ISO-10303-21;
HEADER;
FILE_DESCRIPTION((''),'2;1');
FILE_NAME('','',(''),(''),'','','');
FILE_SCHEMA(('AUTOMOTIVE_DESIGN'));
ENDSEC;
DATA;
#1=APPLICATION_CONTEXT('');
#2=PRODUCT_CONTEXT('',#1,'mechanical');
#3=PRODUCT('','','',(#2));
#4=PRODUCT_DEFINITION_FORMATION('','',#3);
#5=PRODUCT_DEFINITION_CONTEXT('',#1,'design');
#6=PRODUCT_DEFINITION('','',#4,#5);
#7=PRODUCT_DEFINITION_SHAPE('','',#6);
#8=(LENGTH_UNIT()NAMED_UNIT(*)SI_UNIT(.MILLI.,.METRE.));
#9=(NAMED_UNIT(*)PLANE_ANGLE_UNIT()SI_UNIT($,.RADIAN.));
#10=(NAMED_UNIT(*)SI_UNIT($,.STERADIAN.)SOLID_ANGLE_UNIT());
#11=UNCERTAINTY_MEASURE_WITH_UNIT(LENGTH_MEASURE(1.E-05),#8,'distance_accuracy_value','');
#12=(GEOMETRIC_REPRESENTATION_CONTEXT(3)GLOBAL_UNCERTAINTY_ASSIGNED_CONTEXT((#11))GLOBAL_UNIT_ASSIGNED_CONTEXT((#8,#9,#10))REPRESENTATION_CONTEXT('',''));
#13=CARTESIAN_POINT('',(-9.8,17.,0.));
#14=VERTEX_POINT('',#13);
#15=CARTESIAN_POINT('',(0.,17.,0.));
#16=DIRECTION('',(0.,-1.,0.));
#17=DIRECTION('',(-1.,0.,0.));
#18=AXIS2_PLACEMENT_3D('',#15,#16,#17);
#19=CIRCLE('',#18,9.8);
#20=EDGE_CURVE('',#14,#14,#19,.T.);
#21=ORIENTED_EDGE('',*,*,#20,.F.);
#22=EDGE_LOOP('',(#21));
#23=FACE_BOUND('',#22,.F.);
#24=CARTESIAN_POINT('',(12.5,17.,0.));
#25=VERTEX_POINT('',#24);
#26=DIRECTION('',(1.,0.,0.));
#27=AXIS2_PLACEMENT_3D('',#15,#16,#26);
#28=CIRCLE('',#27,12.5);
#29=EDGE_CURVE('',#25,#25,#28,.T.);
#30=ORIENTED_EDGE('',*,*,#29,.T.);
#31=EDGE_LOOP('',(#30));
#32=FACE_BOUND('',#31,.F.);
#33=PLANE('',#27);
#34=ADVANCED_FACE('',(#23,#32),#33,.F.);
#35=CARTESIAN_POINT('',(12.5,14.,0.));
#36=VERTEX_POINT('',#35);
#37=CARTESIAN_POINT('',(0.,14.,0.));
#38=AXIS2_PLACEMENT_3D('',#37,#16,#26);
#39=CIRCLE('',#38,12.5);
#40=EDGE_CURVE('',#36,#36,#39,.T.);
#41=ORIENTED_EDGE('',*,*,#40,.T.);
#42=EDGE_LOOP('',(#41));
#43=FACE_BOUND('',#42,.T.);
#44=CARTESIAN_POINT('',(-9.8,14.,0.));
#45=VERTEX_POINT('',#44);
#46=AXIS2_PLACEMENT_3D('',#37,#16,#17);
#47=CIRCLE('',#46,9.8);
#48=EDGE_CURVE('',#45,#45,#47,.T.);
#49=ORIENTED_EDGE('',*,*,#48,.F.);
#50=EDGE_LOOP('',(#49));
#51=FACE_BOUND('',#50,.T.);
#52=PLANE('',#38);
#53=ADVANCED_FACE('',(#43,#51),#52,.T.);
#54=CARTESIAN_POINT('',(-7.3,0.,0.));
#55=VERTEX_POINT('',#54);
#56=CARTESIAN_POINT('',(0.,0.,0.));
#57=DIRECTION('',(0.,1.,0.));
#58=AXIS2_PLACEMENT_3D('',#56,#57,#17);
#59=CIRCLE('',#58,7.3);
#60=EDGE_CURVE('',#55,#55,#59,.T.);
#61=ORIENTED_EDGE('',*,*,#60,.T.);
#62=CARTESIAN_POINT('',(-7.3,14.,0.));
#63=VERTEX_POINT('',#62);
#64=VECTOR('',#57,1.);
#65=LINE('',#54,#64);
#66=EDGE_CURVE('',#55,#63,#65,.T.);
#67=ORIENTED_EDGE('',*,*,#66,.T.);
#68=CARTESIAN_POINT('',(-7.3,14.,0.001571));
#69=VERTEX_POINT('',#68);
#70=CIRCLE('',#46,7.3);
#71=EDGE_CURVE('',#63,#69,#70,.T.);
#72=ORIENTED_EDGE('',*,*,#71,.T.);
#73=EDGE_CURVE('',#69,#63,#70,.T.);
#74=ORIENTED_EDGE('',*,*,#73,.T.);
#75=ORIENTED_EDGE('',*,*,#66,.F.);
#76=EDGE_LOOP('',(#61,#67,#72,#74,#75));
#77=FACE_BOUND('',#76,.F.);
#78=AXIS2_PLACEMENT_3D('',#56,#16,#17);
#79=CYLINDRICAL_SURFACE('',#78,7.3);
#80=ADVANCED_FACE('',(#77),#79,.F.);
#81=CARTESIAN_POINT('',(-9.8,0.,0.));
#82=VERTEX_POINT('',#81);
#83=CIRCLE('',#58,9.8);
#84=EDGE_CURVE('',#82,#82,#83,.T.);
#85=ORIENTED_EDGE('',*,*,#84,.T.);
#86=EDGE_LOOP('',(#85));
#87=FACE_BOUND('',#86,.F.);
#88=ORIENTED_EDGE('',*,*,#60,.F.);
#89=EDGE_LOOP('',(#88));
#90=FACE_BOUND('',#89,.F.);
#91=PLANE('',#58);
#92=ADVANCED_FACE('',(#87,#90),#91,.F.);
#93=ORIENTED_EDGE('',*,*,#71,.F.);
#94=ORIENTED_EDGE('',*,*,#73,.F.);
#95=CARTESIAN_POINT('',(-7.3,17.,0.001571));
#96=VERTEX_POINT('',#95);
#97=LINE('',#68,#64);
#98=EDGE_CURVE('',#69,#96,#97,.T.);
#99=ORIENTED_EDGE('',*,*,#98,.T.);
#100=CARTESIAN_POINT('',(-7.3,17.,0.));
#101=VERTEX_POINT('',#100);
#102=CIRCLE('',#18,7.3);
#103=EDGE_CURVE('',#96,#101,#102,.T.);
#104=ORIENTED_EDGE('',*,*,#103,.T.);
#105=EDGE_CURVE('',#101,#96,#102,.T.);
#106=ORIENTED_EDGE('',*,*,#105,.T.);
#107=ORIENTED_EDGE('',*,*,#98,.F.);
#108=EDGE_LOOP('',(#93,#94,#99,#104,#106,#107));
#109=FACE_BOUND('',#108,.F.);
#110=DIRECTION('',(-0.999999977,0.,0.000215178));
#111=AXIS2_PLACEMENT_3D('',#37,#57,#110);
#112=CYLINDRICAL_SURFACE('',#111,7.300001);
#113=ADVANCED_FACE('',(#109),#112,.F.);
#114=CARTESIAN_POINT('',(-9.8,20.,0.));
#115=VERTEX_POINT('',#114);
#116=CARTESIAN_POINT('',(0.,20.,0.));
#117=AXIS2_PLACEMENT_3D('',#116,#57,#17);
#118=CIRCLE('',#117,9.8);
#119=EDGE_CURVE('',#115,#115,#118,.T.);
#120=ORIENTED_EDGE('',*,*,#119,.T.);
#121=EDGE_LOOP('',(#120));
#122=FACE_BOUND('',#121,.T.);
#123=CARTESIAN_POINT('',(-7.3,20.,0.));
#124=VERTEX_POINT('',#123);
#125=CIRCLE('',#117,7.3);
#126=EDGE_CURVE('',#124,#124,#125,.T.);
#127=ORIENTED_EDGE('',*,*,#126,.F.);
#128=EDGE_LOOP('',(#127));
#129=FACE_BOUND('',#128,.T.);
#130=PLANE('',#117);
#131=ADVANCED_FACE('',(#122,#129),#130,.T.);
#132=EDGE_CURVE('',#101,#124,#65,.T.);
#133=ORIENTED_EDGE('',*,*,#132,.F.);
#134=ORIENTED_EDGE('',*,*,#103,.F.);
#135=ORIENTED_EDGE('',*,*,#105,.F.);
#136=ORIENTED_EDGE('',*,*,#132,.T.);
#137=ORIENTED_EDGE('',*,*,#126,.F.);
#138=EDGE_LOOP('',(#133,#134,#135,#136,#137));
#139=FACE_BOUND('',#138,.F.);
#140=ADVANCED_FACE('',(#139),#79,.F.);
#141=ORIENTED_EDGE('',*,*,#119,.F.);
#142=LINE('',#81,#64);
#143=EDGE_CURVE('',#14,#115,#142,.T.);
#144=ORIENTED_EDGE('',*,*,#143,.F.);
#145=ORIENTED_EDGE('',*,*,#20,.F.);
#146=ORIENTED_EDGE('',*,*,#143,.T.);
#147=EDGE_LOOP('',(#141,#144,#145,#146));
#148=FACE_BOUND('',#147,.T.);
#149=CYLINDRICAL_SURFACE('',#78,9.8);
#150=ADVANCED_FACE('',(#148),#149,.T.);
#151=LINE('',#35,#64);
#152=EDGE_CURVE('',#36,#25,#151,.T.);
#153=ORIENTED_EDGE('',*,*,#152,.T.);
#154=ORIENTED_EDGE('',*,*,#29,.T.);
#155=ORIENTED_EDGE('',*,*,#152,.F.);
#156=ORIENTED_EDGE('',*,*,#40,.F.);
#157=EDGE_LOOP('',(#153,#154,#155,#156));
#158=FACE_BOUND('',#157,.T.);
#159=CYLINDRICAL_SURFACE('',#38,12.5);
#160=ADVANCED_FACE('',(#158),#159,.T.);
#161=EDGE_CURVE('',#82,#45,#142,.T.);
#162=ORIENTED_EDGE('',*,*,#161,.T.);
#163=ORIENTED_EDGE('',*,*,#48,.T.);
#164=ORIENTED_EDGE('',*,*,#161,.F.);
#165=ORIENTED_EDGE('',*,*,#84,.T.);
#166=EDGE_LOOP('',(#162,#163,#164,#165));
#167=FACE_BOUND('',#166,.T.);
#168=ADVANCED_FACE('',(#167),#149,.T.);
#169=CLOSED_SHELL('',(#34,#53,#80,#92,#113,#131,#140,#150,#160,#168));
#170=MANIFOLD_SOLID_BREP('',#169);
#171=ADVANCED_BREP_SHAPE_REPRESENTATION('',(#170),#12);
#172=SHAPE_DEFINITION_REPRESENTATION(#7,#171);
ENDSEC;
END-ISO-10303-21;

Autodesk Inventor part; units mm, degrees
ref_plane "YZ Plane" through (0, 0, 0) normal (1, 0, 0) x (0, 1, 0)
ref_plane "XZ Plane" through (0, 0, 0) normal (0, 1, 0) x (-1, 0, 0)
sketch "Sketch1" plane through (0, 0, 0) normal (0, 1, 0) x (-1, 0, 0)
  circle A0 centre (0, 0) radius 9.8
  dimension "d0" = 19.6
extrude "Extrusion1" add sketch "Sketch1" along normal blind 20
ref_plane "Work Plane1" through (0, 14, 0) normal (0, -1, 0) x (1, 0, 0)
sketch "Sketch3" plane through (0, 14, 0) normal (0, -1, 0) x (1, 0, 0)
  circle A0 centre (0, 0) radius 12.5
  dimension "d7" = 25
extrude "Extrusion3" add sketch "Sketch3" against normal blind 3
shell "Shell1" thickness 2.5 removed faces 2 at (0.3035, 20, 2.5) at (0.3035, 0, 2.5)
properties part number "Pomodoro Robot Neck"
